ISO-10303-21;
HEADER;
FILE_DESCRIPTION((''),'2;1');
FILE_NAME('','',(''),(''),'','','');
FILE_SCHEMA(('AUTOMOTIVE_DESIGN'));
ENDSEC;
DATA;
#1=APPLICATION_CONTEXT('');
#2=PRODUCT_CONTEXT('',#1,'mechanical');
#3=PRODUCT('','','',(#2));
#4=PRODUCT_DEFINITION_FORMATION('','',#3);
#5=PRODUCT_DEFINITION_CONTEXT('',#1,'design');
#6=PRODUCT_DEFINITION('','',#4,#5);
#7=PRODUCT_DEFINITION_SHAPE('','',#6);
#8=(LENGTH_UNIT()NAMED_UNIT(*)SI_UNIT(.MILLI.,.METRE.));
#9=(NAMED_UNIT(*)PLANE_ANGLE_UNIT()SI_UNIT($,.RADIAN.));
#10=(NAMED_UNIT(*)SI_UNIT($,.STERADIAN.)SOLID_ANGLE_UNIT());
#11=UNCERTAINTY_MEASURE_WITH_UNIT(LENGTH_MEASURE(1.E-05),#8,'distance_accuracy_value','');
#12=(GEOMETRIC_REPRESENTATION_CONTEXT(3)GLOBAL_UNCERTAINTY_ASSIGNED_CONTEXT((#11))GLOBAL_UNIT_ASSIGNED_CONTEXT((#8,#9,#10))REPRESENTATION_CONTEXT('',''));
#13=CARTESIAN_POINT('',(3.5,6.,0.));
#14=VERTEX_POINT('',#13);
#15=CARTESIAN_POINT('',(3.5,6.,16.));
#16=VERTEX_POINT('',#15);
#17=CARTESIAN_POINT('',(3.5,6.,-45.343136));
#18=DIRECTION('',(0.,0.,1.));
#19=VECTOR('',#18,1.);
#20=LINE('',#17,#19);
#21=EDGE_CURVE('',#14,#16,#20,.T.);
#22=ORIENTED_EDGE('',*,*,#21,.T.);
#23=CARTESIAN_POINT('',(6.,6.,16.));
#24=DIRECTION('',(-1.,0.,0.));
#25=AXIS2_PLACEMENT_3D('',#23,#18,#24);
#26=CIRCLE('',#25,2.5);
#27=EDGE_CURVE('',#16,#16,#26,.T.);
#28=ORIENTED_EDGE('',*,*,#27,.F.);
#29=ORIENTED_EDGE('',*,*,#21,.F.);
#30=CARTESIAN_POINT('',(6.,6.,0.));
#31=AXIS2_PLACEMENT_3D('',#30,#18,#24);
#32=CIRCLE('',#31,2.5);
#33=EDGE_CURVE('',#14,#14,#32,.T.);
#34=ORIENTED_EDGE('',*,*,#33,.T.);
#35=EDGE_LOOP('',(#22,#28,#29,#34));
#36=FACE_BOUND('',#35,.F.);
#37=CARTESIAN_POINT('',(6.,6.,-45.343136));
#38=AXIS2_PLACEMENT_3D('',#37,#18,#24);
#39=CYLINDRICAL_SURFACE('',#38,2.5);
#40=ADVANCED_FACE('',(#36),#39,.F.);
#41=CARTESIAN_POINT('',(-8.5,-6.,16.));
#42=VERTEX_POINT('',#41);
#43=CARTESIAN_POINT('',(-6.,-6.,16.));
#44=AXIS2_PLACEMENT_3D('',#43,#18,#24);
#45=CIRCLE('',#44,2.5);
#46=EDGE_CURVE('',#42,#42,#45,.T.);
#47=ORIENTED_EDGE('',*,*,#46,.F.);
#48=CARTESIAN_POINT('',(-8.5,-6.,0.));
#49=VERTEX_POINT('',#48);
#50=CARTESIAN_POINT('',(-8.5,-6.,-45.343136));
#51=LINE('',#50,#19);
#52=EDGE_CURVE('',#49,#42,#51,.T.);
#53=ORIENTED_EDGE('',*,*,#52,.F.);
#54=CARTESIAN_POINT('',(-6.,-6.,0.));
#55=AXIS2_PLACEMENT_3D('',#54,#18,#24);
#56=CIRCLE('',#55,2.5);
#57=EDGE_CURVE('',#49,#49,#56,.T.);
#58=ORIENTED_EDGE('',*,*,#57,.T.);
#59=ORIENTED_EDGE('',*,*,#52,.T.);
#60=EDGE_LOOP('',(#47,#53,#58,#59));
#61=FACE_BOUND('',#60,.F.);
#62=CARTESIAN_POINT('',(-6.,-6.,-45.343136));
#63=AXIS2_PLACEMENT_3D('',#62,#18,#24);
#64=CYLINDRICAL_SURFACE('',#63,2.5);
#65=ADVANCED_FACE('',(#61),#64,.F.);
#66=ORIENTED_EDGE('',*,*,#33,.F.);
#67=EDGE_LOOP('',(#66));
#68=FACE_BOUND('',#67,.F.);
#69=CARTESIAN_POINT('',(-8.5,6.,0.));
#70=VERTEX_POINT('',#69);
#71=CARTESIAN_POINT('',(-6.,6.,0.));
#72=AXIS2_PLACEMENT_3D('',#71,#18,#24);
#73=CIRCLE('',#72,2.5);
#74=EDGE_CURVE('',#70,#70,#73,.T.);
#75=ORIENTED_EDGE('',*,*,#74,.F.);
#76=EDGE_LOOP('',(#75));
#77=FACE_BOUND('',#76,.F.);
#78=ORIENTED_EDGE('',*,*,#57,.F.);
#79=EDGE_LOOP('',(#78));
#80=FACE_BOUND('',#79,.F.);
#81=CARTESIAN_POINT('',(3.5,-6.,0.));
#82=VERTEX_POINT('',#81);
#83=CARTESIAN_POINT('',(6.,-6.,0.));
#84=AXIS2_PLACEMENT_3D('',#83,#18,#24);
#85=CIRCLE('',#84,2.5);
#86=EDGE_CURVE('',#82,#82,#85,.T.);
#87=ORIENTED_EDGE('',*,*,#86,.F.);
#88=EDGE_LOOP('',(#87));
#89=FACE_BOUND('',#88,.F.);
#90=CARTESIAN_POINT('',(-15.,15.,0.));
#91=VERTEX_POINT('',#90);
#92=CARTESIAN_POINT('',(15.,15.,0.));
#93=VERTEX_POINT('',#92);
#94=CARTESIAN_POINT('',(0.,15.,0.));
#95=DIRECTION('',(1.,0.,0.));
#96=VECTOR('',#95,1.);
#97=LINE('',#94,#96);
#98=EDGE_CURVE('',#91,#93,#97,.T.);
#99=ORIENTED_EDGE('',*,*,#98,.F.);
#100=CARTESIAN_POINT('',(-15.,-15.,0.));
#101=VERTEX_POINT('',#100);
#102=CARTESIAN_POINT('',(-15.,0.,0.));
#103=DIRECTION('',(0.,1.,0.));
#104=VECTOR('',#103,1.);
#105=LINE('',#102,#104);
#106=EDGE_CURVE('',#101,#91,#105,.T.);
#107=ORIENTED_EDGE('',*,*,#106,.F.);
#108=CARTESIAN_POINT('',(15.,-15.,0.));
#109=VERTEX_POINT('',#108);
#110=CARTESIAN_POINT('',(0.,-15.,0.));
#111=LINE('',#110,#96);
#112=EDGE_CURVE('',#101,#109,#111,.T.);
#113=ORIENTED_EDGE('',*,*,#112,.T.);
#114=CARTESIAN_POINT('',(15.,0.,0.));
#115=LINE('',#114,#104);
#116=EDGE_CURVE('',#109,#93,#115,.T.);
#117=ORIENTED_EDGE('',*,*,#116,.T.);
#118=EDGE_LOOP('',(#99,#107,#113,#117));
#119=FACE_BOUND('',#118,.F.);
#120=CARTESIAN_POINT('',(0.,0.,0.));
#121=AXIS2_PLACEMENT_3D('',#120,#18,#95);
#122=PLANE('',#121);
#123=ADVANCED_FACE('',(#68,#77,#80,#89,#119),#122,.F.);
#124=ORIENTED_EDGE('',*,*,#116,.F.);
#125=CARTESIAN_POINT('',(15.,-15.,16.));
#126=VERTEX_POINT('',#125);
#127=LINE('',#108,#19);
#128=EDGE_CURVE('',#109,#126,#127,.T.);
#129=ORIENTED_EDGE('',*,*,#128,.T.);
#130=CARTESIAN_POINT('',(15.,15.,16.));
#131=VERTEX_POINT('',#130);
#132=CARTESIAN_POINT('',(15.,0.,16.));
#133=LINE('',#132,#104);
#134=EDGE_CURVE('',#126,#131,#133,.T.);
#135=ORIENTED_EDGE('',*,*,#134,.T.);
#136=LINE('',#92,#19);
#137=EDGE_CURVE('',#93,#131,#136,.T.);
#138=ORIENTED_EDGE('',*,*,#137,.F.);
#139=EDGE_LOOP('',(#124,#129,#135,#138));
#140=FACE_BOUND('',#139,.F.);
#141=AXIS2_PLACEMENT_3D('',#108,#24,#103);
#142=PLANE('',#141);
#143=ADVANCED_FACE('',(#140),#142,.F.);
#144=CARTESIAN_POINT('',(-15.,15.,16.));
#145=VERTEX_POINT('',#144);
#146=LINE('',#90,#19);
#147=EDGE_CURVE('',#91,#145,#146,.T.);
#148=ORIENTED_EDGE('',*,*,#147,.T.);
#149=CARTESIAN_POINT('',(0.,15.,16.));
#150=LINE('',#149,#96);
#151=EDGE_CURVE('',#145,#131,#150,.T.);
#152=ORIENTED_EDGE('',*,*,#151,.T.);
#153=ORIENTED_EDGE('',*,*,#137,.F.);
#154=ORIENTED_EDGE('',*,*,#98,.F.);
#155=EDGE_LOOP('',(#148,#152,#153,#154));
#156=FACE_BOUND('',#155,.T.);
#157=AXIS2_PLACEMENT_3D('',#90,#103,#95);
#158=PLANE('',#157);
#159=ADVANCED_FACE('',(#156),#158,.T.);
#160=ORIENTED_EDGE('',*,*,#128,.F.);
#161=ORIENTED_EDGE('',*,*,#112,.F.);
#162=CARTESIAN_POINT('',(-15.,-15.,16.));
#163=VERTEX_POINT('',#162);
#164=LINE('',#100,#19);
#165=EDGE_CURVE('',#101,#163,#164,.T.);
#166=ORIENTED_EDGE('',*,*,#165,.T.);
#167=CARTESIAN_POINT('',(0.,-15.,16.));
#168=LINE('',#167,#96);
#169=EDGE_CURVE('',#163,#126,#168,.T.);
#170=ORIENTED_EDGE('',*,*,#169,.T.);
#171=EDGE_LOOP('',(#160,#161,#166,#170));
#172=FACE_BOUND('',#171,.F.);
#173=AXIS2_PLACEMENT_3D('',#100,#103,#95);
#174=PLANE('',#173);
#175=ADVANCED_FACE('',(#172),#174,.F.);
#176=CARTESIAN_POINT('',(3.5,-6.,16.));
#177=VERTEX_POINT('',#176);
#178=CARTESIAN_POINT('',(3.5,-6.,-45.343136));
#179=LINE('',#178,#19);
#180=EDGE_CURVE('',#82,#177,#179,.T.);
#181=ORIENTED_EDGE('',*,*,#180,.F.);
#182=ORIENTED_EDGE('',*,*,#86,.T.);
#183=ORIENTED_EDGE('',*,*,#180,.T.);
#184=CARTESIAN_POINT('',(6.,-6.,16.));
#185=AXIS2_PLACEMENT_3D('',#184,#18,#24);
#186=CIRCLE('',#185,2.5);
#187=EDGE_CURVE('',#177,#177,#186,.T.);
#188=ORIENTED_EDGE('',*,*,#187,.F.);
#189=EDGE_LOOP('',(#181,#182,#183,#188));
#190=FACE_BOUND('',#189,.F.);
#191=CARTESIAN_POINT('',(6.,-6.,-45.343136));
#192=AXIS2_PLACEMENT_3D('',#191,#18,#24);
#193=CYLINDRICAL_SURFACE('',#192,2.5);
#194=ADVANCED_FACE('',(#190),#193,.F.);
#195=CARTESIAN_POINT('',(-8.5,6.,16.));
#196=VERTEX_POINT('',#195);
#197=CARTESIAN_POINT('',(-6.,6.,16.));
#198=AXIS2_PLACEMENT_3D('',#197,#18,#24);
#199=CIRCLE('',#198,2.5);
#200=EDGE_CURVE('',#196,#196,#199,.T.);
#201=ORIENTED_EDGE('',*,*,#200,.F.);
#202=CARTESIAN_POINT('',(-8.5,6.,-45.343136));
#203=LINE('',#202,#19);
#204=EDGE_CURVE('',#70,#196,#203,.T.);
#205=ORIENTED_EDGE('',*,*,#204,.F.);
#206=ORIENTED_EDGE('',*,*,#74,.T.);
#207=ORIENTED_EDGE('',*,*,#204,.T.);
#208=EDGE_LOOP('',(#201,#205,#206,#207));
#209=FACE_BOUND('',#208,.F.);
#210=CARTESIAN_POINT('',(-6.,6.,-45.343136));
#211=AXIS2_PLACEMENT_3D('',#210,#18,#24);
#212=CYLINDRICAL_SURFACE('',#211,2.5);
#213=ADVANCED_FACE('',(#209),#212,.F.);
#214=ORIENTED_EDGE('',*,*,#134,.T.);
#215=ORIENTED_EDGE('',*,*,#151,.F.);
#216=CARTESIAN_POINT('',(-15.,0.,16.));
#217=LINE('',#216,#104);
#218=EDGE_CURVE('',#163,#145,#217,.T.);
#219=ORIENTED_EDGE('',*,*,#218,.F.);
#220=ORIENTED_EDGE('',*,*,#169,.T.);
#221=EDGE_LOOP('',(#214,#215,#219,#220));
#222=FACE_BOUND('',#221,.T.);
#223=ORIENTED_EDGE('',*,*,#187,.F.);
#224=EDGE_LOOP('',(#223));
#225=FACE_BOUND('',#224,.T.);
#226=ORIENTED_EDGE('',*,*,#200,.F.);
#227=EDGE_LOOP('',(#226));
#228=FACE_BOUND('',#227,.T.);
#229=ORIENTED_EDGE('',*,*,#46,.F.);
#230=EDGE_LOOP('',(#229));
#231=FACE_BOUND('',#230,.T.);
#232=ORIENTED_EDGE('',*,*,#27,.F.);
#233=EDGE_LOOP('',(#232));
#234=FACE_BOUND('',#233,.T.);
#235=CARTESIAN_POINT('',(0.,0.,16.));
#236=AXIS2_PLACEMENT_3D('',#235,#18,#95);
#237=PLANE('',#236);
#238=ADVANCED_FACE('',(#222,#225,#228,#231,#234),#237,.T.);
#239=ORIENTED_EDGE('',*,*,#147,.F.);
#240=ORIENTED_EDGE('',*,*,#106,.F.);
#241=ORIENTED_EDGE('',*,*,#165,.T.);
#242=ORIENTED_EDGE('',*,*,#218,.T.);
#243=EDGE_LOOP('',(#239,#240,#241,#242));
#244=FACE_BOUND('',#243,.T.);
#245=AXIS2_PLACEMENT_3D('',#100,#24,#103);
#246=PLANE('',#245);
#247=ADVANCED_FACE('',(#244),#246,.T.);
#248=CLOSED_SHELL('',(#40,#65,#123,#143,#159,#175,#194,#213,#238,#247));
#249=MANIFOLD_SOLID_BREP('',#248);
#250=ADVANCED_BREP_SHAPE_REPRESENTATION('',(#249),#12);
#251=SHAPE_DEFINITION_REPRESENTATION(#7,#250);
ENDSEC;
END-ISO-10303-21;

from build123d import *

# Parameters (mm, degrees)
F0_W     = 30
F0_H     = 30
F1_DEPTH = 16
F2_D     = 5


# Not quite as in the source:
# - a feature names something its author has since deleted; it is built from what else it names


with BuildPart() as f1:
    # F0 (on Top) → F1 (new body)
    with BuildSketch(Plane.XY):
        Rectangle(F0_W, F0_H)
    extrude(amount=F1_DEPTH)

    # F2 (through all)
    with Locations(Plane(origin=(0, 0, 0), x_dir=(1, 0, 0), z_dir=(0, 0, -1))):
        with Locations((-6, -6), (6, 6), (-6, 6), (6, -6)):
            Hole(F2_D / 2)


solid = f1.part
